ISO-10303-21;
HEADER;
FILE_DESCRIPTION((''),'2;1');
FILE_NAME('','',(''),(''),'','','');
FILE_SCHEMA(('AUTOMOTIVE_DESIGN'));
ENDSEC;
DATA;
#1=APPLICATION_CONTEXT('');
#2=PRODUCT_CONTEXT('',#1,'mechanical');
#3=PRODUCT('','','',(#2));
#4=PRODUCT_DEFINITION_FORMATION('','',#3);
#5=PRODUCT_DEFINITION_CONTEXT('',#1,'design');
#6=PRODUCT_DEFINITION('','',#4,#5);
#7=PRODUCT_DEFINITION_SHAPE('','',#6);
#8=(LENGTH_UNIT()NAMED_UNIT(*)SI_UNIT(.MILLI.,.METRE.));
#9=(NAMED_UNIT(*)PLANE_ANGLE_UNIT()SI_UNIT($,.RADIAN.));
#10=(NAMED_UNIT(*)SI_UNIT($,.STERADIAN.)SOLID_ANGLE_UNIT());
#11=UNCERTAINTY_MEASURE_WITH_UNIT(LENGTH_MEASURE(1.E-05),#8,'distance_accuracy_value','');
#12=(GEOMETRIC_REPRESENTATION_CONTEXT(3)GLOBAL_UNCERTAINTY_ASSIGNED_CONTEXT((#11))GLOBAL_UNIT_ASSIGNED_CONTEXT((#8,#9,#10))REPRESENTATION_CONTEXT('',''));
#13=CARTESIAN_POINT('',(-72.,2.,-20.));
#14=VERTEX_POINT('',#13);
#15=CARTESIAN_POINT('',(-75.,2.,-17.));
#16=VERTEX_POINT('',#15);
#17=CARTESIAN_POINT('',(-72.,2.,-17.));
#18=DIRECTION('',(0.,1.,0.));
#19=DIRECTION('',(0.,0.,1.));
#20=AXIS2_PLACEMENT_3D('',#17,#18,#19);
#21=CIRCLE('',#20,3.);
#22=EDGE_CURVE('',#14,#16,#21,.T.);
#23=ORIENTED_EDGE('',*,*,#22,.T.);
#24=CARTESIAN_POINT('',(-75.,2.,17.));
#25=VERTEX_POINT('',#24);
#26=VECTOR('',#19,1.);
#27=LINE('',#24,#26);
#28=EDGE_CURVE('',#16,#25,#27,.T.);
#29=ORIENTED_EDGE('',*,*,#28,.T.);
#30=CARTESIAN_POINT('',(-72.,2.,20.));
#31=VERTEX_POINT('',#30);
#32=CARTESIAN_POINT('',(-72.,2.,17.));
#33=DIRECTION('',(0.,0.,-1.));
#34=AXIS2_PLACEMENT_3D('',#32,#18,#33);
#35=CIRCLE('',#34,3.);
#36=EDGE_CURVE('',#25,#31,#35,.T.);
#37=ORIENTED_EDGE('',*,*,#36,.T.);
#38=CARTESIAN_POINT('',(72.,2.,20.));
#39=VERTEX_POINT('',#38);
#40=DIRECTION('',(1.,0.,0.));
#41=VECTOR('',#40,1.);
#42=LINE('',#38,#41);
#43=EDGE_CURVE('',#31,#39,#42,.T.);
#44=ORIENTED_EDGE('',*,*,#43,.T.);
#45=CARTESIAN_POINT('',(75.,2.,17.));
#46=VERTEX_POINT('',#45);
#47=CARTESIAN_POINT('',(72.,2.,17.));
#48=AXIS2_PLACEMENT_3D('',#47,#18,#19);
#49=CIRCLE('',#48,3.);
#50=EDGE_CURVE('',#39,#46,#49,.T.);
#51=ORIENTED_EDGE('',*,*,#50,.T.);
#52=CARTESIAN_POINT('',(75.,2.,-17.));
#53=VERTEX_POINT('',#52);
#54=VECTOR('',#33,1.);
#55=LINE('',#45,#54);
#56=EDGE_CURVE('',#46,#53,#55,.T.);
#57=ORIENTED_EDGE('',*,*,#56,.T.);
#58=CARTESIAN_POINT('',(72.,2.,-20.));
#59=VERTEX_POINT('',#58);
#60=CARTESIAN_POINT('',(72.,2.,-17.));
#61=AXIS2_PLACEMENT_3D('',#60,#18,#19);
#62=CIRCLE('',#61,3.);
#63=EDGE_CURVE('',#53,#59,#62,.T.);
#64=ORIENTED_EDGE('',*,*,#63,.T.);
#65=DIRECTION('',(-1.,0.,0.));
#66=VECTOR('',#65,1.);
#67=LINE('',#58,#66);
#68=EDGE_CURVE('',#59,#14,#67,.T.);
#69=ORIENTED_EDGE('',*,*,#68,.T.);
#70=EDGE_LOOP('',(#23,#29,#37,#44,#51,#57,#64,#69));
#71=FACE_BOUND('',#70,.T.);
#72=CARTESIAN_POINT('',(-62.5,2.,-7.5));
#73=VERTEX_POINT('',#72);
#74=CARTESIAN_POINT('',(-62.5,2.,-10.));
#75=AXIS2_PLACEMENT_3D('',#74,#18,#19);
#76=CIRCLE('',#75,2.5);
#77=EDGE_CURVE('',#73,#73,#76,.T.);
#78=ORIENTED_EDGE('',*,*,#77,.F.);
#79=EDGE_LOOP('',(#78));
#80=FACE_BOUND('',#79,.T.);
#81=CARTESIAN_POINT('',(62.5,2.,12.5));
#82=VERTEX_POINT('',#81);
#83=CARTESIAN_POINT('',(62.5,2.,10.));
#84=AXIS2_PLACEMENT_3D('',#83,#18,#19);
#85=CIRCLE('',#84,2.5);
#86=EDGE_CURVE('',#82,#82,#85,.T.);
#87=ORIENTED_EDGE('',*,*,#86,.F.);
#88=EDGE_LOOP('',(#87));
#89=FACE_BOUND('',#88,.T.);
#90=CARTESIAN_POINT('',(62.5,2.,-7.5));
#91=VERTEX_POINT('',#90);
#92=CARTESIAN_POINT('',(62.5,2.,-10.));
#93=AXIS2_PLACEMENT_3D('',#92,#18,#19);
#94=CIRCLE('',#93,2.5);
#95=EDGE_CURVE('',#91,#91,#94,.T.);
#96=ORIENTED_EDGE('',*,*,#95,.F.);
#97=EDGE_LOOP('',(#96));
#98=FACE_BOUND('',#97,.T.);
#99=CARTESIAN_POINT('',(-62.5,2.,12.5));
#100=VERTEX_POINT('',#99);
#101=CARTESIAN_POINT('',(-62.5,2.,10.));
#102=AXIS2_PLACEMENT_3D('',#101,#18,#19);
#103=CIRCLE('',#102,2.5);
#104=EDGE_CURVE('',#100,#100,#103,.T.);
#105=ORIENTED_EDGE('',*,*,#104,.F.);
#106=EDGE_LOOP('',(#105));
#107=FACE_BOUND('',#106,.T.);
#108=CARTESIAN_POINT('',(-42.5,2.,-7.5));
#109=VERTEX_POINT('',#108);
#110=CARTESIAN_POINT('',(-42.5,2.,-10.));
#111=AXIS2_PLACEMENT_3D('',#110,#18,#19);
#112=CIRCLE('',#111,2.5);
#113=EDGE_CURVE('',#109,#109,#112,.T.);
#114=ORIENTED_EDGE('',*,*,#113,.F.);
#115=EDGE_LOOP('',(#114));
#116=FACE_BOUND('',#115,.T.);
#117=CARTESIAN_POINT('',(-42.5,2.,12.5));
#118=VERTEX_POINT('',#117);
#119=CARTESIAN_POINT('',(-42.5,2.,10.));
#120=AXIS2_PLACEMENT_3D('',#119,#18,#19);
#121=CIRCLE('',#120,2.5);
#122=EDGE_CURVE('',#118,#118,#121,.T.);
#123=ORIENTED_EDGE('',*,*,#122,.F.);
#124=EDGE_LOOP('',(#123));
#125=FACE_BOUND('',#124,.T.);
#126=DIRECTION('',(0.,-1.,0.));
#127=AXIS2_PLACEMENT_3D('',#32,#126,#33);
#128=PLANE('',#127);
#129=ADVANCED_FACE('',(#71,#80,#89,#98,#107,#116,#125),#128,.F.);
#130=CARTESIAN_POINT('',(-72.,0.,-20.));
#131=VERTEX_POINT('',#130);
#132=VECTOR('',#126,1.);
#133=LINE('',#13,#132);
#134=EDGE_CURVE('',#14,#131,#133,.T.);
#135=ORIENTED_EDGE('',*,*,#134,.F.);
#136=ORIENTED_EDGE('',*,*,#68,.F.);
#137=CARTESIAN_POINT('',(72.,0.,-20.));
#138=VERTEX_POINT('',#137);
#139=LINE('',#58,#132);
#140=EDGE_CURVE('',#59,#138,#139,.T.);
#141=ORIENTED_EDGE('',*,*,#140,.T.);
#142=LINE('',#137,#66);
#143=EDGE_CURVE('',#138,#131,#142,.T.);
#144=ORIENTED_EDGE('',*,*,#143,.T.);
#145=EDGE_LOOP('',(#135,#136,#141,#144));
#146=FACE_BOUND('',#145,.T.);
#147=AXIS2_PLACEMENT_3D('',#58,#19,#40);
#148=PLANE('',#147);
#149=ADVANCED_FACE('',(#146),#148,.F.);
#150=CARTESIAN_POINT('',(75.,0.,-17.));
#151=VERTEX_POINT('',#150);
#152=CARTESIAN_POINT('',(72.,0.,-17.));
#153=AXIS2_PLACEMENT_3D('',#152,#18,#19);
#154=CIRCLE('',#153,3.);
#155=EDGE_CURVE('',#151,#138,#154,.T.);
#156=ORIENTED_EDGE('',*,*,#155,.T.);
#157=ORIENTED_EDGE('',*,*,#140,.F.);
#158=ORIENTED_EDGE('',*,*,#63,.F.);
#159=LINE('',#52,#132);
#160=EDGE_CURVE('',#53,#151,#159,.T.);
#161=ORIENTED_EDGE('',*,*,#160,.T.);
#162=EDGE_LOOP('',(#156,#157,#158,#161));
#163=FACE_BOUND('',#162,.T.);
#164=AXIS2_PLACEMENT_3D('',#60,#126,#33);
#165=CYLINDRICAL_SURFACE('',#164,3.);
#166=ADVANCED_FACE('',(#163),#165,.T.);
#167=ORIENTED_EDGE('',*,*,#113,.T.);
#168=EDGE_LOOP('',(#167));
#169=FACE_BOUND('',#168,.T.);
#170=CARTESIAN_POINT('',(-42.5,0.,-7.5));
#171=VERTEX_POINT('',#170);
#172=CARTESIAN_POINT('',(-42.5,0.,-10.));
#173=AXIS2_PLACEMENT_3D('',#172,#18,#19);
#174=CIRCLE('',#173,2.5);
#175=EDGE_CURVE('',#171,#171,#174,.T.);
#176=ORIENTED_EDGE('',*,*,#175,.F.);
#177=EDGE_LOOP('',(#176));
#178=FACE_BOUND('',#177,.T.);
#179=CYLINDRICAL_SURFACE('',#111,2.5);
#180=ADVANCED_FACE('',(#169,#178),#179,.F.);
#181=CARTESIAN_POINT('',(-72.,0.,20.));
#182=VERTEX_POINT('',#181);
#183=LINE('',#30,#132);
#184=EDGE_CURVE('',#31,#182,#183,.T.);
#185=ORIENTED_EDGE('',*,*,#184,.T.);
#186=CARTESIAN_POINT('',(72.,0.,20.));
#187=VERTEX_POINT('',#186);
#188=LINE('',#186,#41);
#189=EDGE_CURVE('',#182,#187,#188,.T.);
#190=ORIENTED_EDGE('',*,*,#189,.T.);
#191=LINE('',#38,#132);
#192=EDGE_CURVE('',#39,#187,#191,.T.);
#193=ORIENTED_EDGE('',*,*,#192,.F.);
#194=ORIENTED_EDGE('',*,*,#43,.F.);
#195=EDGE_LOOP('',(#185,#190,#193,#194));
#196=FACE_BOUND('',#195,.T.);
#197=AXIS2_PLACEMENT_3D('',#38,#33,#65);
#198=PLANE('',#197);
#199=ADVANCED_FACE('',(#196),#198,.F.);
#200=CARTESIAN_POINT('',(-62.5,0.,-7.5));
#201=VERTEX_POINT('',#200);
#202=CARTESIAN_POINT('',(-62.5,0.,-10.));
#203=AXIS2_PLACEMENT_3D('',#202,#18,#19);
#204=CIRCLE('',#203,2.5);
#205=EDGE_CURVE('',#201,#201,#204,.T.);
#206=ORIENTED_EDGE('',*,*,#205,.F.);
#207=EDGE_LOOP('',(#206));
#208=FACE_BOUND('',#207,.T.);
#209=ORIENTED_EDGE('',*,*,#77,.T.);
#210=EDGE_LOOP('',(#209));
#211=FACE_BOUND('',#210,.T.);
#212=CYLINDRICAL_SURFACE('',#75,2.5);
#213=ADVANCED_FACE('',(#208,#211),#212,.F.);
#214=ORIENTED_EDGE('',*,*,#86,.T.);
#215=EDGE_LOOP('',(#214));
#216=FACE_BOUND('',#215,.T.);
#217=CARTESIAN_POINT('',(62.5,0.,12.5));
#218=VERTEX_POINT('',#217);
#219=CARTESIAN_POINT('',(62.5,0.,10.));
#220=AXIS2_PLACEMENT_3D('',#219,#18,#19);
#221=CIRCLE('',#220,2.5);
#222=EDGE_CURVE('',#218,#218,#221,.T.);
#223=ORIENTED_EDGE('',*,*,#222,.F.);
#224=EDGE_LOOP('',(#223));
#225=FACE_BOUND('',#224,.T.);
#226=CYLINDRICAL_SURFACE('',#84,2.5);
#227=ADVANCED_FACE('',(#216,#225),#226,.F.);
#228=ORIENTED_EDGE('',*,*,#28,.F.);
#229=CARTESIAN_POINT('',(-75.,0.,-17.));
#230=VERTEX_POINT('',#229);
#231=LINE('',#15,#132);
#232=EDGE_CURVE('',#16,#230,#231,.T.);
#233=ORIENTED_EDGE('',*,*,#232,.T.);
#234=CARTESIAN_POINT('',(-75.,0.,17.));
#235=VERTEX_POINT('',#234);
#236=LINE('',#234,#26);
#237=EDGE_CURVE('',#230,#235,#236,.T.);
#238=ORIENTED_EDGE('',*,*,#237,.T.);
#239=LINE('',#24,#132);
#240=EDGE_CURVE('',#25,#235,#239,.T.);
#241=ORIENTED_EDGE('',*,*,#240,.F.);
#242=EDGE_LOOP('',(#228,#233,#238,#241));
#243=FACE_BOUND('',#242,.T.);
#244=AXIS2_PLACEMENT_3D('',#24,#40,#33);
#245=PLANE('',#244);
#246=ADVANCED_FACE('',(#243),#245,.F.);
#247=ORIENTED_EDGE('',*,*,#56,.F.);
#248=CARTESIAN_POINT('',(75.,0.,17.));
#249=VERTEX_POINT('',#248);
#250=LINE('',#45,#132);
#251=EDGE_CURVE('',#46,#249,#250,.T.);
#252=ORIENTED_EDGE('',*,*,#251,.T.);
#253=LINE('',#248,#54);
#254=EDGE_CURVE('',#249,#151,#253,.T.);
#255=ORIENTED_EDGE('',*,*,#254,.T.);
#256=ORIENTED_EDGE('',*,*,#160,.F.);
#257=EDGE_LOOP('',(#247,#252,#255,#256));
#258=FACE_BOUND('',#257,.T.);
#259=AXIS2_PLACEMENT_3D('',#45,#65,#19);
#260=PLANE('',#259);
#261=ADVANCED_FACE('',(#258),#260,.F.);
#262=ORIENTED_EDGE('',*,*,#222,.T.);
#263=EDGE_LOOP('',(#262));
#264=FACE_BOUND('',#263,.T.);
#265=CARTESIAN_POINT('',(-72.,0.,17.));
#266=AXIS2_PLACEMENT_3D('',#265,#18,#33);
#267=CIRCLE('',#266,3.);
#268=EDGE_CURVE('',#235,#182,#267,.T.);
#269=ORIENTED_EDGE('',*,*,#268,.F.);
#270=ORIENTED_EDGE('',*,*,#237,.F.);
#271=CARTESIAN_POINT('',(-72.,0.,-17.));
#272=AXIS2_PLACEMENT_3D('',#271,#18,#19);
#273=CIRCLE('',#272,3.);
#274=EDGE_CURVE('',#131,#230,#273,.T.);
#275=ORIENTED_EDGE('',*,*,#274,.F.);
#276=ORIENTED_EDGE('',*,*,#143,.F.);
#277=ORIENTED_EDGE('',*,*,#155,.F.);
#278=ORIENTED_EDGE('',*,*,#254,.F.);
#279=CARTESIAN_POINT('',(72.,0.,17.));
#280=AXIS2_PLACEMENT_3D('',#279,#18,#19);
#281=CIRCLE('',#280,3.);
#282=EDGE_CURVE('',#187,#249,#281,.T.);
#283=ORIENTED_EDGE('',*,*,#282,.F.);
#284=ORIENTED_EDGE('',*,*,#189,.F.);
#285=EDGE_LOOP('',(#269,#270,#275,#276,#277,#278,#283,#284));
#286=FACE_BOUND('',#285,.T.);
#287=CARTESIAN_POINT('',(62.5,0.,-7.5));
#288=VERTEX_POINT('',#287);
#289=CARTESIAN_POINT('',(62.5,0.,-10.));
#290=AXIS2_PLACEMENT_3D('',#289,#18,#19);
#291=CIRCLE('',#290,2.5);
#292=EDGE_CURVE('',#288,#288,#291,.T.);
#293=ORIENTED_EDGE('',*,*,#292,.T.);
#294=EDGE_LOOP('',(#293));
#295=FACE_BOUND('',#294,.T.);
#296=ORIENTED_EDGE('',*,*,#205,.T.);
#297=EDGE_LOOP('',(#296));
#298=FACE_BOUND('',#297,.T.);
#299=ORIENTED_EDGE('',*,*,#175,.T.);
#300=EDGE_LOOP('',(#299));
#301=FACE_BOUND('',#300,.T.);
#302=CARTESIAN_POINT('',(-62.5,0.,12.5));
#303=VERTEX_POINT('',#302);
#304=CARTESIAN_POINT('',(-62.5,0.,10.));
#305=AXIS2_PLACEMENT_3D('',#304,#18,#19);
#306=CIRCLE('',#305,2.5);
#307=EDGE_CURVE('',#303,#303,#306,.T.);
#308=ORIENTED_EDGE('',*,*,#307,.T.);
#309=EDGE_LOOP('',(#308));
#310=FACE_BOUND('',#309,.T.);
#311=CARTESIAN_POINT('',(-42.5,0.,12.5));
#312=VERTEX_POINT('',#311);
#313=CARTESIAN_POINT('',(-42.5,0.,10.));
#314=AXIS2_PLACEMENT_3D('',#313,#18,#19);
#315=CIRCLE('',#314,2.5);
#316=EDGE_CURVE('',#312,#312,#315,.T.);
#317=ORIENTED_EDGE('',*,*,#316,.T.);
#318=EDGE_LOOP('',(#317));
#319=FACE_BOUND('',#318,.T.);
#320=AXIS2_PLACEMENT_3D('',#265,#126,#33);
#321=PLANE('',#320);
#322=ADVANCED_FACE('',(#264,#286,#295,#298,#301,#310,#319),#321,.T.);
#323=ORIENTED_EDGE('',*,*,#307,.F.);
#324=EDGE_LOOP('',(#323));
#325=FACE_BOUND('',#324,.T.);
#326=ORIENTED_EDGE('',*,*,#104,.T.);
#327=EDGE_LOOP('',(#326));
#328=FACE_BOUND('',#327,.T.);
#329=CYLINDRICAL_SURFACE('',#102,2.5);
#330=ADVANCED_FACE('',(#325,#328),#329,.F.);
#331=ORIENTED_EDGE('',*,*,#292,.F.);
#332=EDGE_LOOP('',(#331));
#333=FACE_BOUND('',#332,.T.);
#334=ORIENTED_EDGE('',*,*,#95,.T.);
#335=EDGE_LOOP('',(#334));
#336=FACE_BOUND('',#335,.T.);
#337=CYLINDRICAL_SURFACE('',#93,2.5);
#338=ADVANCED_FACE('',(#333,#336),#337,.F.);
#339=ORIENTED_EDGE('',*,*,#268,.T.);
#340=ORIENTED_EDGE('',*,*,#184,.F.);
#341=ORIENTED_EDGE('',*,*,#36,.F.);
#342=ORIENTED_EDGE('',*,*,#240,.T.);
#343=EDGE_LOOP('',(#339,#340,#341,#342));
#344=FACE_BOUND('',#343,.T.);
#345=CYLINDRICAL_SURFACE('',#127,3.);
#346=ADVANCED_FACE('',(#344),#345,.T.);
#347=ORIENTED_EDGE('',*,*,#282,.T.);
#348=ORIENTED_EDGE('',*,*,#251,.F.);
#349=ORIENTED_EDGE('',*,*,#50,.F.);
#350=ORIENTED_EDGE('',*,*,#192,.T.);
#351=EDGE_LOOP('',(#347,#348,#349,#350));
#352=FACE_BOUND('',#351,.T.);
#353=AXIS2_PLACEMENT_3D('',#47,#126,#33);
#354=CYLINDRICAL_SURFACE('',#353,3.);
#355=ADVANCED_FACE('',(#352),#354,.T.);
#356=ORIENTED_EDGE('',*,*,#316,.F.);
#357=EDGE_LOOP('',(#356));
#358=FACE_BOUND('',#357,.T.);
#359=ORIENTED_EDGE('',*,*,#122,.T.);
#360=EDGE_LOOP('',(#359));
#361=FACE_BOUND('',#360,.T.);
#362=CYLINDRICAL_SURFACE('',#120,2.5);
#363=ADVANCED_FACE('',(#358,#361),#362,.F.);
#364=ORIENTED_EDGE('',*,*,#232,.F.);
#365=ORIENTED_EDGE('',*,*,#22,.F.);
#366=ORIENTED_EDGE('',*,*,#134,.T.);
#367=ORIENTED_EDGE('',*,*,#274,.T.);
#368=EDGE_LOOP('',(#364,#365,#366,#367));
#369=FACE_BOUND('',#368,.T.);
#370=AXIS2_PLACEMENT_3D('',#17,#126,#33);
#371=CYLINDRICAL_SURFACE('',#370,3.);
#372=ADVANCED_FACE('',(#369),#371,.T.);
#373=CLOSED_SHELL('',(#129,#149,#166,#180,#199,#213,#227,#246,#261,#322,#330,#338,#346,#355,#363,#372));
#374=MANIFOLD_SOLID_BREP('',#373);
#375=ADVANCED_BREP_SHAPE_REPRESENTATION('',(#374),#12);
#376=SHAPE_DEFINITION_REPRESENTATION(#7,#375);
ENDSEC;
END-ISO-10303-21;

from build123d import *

# Parameters (mm, degrees)
BASE_FLANGE1_DEPTH    = 2
F_5_0MM_DOWEL_HOLE1_D = 5


# Sheet-metal steps are written as plain solids
with BuildPart() as part:
    # Sketch1 → Base-Flange1 (new body)
    with BuildSketch(Plane(origin=(0, 0, 0), x_dir=(1, 0, 0), z_dir=(0, 1, 0))):
        with BuildLine():
            Line((72, -20), (-72, -20))
            ThreePointArc((-72, -20), (-74.121320344, -19.121320344), (-75, -17))
            Line((-75, -17), (-75, 17))
            ThreePointArc((-75, 17), (-74.121320344, 19.121320344), (-72, 20))
            Line((-72, 20), (72, 20))
            ThreePointArc((72, 20), (74.121320344, 19.121320344), (75, 17))
            Line((75, 17), (75, -17))
            ThreePointArc((75, -17), (74.121320344, -19.121320344), (72, -20))
        make_face()
    extrude(amount=BASE_FLANGE1_DEPTH)

    # Ø5.0mm Dowel Hole1 (through all)
    with Locations(Plane(origin=(0, 2, 0), x_dir=(1, 0, 0), z_dir=(0, 1, 0))):
        with Locations((-62.5, 10), (-62.5, -10), (-42.5, -10), (-42.5, 10), (62.5, 10), (62.5, -10)):
            Hole(F_5_0MM_DOWEL_HOLE1_D / 2)


solid = part.part
